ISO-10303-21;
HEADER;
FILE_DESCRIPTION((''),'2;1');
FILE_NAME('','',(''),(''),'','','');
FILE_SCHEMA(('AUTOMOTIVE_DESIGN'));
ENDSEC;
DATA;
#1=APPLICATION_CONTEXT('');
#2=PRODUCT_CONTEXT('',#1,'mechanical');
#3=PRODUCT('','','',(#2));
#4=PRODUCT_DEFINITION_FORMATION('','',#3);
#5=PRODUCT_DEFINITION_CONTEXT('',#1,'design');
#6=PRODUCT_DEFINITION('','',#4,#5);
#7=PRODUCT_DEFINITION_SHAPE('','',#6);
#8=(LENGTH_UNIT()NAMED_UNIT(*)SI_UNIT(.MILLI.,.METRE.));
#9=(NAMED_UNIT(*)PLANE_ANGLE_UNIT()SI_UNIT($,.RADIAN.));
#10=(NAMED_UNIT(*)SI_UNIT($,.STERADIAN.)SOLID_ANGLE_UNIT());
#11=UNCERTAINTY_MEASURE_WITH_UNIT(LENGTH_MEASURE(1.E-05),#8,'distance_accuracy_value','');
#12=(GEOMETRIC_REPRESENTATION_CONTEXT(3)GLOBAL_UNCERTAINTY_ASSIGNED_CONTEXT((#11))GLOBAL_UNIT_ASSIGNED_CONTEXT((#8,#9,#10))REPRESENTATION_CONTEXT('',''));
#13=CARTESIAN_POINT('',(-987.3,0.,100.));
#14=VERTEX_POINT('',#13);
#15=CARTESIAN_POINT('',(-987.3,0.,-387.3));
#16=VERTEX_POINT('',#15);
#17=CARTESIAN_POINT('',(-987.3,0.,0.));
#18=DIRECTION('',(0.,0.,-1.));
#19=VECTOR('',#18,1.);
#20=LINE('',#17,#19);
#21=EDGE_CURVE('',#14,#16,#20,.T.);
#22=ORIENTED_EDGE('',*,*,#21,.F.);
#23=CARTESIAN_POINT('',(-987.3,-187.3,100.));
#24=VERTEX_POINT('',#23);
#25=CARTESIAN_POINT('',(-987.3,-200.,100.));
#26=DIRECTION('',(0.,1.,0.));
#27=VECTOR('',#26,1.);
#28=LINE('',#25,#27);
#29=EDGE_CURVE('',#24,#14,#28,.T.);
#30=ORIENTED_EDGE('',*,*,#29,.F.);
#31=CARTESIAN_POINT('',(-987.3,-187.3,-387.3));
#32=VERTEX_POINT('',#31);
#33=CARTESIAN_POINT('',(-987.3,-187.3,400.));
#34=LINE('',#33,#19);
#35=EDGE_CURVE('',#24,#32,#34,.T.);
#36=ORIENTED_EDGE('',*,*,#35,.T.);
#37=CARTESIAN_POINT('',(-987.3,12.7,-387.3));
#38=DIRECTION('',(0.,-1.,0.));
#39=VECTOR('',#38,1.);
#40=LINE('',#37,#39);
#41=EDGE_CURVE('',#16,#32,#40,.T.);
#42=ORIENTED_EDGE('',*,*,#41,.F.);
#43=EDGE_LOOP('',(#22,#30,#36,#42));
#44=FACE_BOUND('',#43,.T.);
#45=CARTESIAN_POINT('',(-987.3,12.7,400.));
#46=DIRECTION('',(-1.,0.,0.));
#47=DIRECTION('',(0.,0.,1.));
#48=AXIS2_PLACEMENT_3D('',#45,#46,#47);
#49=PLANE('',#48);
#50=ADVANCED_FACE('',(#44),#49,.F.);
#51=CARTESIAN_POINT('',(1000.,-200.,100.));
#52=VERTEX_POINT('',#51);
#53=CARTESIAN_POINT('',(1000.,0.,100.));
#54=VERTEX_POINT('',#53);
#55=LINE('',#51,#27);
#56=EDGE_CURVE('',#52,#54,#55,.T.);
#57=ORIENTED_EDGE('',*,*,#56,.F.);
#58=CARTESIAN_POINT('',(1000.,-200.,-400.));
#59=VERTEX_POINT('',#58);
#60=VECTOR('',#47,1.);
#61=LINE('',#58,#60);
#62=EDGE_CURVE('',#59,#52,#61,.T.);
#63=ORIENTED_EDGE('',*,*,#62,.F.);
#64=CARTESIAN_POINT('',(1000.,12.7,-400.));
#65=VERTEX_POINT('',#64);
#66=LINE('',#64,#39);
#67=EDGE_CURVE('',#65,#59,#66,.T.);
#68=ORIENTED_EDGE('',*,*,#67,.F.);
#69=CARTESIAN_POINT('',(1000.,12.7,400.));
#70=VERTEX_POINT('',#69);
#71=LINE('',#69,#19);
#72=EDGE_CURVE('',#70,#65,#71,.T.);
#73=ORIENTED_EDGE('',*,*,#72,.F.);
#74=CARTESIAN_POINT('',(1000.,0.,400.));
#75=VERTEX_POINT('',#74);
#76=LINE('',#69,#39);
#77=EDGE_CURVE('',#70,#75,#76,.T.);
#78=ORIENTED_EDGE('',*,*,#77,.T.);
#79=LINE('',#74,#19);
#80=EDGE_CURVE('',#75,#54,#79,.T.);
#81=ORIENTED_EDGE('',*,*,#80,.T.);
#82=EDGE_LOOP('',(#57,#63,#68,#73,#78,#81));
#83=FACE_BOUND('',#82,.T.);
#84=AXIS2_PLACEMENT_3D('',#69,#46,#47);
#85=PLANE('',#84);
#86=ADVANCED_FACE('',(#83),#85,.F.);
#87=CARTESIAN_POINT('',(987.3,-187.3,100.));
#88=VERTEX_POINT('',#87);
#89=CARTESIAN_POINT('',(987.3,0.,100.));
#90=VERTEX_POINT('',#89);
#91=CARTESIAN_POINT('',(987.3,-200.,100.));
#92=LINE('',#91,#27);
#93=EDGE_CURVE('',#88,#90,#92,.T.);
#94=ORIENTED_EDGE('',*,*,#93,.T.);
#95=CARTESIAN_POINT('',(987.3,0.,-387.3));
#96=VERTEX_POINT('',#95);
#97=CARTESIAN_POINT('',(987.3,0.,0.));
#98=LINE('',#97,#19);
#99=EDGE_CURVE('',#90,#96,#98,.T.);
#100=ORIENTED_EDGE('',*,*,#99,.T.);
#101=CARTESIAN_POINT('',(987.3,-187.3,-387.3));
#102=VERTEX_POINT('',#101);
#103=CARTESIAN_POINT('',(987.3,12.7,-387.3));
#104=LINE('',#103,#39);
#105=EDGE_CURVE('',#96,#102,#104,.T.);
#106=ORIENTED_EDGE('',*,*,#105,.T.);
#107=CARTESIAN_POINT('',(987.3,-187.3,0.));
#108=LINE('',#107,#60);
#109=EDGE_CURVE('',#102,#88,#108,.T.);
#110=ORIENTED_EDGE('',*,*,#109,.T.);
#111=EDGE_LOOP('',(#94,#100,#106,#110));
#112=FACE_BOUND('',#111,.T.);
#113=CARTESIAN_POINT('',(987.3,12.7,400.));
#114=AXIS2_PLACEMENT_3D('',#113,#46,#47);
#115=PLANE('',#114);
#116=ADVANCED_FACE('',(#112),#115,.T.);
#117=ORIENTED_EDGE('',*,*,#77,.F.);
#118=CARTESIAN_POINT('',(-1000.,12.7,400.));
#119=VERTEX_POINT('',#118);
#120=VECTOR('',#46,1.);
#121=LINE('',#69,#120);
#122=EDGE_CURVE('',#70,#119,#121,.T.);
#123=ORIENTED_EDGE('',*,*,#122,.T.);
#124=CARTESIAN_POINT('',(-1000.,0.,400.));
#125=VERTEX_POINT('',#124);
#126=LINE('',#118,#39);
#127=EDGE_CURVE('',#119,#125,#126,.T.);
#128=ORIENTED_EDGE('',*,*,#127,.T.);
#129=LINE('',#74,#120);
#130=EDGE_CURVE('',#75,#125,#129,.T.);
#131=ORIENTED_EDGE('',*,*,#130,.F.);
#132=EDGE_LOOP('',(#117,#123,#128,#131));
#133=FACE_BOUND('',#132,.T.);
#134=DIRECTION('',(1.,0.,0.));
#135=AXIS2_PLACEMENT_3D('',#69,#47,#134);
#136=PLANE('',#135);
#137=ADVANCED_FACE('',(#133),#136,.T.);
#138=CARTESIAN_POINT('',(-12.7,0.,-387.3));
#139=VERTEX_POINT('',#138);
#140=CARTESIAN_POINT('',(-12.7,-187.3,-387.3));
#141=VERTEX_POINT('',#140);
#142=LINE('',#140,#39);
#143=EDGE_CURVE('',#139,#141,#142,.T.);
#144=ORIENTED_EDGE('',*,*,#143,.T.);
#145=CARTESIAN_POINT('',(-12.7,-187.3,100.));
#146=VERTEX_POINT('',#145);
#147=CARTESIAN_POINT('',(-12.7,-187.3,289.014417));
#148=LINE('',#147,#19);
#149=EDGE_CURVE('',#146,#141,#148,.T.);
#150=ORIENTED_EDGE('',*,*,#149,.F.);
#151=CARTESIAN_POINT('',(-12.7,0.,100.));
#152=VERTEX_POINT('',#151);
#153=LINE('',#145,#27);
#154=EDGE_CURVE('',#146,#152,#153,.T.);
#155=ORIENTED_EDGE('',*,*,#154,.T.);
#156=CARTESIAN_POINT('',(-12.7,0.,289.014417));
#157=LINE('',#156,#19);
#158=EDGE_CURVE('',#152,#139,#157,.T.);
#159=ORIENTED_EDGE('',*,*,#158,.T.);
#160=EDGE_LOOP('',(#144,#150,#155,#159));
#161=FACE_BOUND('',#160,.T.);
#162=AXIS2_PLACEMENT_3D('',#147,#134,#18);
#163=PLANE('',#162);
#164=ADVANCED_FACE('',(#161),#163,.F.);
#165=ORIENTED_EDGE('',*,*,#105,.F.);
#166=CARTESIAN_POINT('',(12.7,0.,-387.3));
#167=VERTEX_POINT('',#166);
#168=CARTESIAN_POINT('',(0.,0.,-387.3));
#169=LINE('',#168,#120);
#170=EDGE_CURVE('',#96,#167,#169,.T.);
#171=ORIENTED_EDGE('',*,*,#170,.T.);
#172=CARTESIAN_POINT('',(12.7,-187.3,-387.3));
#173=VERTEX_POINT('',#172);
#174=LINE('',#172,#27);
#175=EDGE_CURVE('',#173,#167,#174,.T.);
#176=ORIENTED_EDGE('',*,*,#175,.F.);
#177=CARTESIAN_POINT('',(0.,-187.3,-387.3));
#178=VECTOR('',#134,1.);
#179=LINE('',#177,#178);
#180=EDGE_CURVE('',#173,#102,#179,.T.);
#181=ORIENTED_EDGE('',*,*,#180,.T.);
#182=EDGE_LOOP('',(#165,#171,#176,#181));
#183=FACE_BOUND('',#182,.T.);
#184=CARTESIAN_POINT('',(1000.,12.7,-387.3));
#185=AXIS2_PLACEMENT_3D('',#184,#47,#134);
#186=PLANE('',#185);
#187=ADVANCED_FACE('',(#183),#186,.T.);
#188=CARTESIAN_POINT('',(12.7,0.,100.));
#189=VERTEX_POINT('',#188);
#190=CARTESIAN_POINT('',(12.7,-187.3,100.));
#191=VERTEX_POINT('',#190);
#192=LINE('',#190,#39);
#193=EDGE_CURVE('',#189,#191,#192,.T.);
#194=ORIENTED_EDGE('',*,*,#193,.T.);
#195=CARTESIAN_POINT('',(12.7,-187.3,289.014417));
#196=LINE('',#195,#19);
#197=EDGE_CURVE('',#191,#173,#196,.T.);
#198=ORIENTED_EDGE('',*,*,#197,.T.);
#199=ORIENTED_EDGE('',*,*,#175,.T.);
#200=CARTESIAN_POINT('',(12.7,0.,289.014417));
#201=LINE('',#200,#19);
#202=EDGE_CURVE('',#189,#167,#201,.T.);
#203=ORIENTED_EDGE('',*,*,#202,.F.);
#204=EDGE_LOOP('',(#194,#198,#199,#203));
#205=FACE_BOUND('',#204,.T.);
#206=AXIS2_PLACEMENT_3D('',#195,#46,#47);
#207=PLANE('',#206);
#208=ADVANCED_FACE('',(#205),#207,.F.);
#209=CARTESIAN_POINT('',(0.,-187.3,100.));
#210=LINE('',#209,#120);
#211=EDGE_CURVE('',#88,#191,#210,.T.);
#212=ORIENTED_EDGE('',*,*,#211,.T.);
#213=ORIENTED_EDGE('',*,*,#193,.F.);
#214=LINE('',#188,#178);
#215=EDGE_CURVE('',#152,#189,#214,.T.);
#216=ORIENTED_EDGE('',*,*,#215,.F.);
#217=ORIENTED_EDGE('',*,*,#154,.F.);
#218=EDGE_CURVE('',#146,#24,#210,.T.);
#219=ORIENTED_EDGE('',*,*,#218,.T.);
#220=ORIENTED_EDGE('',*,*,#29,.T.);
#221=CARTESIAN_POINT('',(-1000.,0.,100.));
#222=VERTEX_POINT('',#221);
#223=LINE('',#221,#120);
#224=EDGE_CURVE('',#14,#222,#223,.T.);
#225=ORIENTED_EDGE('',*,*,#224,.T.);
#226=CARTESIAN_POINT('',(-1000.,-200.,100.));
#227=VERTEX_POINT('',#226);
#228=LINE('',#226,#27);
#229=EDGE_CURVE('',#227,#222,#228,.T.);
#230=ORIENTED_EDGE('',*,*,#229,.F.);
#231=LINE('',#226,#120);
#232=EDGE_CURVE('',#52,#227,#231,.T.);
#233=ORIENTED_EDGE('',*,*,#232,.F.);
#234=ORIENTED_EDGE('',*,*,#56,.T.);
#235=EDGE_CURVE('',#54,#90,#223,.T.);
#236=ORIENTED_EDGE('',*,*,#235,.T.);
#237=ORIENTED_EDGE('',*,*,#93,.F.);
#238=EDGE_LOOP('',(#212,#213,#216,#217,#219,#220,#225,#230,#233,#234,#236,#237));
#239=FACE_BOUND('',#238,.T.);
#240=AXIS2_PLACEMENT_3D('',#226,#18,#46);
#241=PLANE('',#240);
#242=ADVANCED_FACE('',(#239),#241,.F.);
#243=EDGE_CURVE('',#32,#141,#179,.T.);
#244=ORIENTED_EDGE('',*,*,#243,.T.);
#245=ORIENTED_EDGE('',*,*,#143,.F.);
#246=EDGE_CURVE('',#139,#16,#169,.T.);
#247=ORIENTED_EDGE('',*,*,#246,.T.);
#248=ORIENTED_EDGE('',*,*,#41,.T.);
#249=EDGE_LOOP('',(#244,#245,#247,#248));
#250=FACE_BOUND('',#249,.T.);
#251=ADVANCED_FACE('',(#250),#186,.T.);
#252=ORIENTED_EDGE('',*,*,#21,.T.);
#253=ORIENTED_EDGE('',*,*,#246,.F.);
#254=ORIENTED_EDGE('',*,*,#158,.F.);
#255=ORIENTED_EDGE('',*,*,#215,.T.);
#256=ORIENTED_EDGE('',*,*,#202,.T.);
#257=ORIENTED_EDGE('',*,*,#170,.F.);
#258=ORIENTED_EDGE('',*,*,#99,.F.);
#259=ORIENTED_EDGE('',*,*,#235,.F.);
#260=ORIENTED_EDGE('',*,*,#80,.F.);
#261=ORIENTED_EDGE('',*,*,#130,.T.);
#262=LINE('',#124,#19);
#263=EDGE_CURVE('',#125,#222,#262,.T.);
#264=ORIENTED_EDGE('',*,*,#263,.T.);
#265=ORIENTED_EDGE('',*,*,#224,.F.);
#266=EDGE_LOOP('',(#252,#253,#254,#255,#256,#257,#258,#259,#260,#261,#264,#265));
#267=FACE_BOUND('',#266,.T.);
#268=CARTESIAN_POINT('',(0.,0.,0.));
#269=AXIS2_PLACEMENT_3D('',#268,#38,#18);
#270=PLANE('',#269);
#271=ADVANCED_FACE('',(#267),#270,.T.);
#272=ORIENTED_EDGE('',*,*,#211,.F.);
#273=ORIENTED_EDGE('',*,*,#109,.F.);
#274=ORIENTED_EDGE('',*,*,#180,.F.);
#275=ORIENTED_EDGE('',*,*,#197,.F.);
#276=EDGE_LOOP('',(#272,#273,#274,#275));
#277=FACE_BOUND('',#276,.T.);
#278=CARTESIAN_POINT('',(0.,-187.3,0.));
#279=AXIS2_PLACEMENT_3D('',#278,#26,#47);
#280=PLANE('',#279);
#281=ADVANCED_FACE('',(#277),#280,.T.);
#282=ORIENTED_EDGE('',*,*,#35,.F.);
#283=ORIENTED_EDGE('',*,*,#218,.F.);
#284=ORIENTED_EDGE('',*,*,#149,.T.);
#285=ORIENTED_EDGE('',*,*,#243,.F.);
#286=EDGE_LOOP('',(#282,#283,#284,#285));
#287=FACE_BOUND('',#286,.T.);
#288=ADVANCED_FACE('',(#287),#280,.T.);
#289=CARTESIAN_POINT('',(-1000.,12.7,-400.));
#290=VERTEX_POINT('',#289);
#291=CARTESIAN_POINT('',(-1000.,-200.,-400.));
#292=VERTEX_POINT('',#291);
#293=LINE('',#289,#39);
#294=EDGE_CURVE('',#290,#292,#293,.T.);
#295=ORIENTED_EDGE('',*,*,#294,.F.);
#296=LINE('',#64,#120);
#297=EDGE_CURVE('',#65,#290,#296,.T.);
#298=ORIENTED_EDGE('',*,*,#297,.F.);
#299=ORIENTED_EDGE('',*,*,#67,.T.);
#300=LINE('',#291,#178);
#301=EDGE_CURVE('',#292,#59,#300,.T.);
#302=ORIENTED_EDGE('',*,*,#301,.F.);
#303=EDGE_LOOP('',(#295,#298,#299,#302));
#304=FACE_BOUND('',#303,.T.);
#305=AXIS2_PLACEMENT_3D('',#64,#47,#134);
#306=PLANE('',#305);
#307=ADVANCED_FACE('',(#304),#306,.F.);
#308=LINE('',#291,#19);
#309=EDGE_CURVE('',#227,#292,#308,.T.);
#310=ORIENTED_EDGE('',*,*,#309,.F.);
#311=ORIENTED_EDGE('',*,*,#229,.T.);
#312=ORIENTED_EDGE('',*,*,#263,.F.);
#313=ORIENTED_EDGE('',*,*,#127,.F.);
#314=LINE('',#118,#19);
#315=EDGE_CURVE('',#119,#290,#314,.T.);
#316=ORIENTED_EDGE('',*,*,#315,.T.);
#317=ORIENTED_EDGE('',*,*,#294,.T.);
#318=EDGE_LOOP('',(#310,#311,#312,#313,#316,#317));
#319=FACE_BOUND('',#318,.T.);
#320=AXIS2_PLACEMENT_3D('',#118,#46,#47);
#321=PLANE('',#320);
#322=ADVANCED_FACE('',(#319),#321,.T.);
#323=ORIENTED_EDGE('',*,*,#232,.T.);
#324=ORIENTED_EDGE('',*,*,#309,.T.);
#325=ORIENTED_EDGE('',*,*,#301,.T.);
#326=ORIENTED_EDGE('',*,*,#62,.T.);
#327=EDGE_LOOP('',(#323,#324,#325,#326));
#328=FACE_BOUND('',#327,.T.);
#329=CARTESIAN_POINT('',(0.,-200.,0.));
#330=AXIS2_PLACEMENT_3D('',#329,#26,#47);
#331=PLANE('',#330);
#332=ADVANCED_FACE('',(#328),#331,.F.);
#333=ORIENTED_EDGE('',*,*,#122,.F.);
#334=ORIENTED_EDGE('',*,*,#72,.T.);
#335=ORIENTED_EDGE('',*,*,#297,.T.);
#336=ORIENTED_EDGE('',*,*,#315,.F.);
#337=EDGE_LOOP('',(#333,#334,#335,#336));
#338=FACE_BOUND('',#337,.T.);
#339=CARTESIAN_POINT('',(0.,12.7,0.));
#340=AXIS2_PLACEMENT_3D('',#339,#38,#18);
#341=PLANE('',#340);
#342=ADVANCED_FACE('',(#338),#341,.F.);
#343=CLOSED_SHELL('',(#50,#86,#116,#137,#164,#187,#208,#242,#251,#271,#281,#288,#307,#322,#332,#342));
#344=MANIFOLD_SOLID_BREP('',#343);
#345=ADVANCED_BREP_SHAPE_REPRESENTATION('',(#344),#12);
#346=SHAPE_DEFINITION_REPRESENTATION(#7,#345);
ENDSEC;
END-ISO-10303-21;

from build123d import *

# Parameters (mm, degrees)
SKETCH1_W           = 2000
SKETCH1_H           = 800
BOSS_EXTRUDE1_DEPTH = 12.7
SKETCH2_W           = 2000
SKETCH2_H           = 500
BOSS_EXTRUDE2_DEPTH = 200
SHELL1_START        = -187.3
SHELL1_OUTLINE_W    = 1974.6
SHELL1_OUTLINE_H    = 487.3
SHELL1_DEPTH        = 187.3
SKETCH4_W           = 25.4
SKETCH4_H           = 187.3
BOSS_EXTRUDE3_DEPTH = 487.3


# Read off the part's stored shape, not the designer's step: Shell1
with BuildPart() as part:
    # Sketch1 → Boss-Extrude1 (new body)
    with BuildSketch(Plane(origin=(0, 0, 0), x_dir=(1, 0, 0), z_dir=(0, 1, 0))):
        Rectangle(SKETCH1_W, SKETCH1_H)
    extrude(amount=BOSS_EXTRUDE1_DEPTH)

    # Sketch2 → Boss-Extrude2 (add)
    with BuildSketch(Plane.XZ):
        with Locations((0, -150)):
            Rectangle(SKETCH2_W, SKETCH2_H)
    extrude(amount=BOSS_EXTRUDE2_DEPTH)

    # Shell1 outline → Shell1 (cut)
    with BuildSketch(Plane(origin=(0, 0, 0), x_dir=(1, 0, 0), z_dir=(0, 1, 0)).offset(SHELL1_START)):
        with Locations((0, 143.65)):
            Rectangle(SHELL1_OUTLINE_W, SHELL1_OUTLINE_H)
    extrude(amount=SHELL1_DEPTH, mode=Mode.SUBTRACT)

    # Sketch4 → Boss-Extrude3 (add)
    with BuildSketch(Plane.XY.offset(-387.3)):
        with Locations((0, -93.65)):
            Rectangle(SKETCH4_W, SKETCH4_H)
    extrude(amount=BOSS_EXTRUDE3_DEPTH)


solid = part.part
